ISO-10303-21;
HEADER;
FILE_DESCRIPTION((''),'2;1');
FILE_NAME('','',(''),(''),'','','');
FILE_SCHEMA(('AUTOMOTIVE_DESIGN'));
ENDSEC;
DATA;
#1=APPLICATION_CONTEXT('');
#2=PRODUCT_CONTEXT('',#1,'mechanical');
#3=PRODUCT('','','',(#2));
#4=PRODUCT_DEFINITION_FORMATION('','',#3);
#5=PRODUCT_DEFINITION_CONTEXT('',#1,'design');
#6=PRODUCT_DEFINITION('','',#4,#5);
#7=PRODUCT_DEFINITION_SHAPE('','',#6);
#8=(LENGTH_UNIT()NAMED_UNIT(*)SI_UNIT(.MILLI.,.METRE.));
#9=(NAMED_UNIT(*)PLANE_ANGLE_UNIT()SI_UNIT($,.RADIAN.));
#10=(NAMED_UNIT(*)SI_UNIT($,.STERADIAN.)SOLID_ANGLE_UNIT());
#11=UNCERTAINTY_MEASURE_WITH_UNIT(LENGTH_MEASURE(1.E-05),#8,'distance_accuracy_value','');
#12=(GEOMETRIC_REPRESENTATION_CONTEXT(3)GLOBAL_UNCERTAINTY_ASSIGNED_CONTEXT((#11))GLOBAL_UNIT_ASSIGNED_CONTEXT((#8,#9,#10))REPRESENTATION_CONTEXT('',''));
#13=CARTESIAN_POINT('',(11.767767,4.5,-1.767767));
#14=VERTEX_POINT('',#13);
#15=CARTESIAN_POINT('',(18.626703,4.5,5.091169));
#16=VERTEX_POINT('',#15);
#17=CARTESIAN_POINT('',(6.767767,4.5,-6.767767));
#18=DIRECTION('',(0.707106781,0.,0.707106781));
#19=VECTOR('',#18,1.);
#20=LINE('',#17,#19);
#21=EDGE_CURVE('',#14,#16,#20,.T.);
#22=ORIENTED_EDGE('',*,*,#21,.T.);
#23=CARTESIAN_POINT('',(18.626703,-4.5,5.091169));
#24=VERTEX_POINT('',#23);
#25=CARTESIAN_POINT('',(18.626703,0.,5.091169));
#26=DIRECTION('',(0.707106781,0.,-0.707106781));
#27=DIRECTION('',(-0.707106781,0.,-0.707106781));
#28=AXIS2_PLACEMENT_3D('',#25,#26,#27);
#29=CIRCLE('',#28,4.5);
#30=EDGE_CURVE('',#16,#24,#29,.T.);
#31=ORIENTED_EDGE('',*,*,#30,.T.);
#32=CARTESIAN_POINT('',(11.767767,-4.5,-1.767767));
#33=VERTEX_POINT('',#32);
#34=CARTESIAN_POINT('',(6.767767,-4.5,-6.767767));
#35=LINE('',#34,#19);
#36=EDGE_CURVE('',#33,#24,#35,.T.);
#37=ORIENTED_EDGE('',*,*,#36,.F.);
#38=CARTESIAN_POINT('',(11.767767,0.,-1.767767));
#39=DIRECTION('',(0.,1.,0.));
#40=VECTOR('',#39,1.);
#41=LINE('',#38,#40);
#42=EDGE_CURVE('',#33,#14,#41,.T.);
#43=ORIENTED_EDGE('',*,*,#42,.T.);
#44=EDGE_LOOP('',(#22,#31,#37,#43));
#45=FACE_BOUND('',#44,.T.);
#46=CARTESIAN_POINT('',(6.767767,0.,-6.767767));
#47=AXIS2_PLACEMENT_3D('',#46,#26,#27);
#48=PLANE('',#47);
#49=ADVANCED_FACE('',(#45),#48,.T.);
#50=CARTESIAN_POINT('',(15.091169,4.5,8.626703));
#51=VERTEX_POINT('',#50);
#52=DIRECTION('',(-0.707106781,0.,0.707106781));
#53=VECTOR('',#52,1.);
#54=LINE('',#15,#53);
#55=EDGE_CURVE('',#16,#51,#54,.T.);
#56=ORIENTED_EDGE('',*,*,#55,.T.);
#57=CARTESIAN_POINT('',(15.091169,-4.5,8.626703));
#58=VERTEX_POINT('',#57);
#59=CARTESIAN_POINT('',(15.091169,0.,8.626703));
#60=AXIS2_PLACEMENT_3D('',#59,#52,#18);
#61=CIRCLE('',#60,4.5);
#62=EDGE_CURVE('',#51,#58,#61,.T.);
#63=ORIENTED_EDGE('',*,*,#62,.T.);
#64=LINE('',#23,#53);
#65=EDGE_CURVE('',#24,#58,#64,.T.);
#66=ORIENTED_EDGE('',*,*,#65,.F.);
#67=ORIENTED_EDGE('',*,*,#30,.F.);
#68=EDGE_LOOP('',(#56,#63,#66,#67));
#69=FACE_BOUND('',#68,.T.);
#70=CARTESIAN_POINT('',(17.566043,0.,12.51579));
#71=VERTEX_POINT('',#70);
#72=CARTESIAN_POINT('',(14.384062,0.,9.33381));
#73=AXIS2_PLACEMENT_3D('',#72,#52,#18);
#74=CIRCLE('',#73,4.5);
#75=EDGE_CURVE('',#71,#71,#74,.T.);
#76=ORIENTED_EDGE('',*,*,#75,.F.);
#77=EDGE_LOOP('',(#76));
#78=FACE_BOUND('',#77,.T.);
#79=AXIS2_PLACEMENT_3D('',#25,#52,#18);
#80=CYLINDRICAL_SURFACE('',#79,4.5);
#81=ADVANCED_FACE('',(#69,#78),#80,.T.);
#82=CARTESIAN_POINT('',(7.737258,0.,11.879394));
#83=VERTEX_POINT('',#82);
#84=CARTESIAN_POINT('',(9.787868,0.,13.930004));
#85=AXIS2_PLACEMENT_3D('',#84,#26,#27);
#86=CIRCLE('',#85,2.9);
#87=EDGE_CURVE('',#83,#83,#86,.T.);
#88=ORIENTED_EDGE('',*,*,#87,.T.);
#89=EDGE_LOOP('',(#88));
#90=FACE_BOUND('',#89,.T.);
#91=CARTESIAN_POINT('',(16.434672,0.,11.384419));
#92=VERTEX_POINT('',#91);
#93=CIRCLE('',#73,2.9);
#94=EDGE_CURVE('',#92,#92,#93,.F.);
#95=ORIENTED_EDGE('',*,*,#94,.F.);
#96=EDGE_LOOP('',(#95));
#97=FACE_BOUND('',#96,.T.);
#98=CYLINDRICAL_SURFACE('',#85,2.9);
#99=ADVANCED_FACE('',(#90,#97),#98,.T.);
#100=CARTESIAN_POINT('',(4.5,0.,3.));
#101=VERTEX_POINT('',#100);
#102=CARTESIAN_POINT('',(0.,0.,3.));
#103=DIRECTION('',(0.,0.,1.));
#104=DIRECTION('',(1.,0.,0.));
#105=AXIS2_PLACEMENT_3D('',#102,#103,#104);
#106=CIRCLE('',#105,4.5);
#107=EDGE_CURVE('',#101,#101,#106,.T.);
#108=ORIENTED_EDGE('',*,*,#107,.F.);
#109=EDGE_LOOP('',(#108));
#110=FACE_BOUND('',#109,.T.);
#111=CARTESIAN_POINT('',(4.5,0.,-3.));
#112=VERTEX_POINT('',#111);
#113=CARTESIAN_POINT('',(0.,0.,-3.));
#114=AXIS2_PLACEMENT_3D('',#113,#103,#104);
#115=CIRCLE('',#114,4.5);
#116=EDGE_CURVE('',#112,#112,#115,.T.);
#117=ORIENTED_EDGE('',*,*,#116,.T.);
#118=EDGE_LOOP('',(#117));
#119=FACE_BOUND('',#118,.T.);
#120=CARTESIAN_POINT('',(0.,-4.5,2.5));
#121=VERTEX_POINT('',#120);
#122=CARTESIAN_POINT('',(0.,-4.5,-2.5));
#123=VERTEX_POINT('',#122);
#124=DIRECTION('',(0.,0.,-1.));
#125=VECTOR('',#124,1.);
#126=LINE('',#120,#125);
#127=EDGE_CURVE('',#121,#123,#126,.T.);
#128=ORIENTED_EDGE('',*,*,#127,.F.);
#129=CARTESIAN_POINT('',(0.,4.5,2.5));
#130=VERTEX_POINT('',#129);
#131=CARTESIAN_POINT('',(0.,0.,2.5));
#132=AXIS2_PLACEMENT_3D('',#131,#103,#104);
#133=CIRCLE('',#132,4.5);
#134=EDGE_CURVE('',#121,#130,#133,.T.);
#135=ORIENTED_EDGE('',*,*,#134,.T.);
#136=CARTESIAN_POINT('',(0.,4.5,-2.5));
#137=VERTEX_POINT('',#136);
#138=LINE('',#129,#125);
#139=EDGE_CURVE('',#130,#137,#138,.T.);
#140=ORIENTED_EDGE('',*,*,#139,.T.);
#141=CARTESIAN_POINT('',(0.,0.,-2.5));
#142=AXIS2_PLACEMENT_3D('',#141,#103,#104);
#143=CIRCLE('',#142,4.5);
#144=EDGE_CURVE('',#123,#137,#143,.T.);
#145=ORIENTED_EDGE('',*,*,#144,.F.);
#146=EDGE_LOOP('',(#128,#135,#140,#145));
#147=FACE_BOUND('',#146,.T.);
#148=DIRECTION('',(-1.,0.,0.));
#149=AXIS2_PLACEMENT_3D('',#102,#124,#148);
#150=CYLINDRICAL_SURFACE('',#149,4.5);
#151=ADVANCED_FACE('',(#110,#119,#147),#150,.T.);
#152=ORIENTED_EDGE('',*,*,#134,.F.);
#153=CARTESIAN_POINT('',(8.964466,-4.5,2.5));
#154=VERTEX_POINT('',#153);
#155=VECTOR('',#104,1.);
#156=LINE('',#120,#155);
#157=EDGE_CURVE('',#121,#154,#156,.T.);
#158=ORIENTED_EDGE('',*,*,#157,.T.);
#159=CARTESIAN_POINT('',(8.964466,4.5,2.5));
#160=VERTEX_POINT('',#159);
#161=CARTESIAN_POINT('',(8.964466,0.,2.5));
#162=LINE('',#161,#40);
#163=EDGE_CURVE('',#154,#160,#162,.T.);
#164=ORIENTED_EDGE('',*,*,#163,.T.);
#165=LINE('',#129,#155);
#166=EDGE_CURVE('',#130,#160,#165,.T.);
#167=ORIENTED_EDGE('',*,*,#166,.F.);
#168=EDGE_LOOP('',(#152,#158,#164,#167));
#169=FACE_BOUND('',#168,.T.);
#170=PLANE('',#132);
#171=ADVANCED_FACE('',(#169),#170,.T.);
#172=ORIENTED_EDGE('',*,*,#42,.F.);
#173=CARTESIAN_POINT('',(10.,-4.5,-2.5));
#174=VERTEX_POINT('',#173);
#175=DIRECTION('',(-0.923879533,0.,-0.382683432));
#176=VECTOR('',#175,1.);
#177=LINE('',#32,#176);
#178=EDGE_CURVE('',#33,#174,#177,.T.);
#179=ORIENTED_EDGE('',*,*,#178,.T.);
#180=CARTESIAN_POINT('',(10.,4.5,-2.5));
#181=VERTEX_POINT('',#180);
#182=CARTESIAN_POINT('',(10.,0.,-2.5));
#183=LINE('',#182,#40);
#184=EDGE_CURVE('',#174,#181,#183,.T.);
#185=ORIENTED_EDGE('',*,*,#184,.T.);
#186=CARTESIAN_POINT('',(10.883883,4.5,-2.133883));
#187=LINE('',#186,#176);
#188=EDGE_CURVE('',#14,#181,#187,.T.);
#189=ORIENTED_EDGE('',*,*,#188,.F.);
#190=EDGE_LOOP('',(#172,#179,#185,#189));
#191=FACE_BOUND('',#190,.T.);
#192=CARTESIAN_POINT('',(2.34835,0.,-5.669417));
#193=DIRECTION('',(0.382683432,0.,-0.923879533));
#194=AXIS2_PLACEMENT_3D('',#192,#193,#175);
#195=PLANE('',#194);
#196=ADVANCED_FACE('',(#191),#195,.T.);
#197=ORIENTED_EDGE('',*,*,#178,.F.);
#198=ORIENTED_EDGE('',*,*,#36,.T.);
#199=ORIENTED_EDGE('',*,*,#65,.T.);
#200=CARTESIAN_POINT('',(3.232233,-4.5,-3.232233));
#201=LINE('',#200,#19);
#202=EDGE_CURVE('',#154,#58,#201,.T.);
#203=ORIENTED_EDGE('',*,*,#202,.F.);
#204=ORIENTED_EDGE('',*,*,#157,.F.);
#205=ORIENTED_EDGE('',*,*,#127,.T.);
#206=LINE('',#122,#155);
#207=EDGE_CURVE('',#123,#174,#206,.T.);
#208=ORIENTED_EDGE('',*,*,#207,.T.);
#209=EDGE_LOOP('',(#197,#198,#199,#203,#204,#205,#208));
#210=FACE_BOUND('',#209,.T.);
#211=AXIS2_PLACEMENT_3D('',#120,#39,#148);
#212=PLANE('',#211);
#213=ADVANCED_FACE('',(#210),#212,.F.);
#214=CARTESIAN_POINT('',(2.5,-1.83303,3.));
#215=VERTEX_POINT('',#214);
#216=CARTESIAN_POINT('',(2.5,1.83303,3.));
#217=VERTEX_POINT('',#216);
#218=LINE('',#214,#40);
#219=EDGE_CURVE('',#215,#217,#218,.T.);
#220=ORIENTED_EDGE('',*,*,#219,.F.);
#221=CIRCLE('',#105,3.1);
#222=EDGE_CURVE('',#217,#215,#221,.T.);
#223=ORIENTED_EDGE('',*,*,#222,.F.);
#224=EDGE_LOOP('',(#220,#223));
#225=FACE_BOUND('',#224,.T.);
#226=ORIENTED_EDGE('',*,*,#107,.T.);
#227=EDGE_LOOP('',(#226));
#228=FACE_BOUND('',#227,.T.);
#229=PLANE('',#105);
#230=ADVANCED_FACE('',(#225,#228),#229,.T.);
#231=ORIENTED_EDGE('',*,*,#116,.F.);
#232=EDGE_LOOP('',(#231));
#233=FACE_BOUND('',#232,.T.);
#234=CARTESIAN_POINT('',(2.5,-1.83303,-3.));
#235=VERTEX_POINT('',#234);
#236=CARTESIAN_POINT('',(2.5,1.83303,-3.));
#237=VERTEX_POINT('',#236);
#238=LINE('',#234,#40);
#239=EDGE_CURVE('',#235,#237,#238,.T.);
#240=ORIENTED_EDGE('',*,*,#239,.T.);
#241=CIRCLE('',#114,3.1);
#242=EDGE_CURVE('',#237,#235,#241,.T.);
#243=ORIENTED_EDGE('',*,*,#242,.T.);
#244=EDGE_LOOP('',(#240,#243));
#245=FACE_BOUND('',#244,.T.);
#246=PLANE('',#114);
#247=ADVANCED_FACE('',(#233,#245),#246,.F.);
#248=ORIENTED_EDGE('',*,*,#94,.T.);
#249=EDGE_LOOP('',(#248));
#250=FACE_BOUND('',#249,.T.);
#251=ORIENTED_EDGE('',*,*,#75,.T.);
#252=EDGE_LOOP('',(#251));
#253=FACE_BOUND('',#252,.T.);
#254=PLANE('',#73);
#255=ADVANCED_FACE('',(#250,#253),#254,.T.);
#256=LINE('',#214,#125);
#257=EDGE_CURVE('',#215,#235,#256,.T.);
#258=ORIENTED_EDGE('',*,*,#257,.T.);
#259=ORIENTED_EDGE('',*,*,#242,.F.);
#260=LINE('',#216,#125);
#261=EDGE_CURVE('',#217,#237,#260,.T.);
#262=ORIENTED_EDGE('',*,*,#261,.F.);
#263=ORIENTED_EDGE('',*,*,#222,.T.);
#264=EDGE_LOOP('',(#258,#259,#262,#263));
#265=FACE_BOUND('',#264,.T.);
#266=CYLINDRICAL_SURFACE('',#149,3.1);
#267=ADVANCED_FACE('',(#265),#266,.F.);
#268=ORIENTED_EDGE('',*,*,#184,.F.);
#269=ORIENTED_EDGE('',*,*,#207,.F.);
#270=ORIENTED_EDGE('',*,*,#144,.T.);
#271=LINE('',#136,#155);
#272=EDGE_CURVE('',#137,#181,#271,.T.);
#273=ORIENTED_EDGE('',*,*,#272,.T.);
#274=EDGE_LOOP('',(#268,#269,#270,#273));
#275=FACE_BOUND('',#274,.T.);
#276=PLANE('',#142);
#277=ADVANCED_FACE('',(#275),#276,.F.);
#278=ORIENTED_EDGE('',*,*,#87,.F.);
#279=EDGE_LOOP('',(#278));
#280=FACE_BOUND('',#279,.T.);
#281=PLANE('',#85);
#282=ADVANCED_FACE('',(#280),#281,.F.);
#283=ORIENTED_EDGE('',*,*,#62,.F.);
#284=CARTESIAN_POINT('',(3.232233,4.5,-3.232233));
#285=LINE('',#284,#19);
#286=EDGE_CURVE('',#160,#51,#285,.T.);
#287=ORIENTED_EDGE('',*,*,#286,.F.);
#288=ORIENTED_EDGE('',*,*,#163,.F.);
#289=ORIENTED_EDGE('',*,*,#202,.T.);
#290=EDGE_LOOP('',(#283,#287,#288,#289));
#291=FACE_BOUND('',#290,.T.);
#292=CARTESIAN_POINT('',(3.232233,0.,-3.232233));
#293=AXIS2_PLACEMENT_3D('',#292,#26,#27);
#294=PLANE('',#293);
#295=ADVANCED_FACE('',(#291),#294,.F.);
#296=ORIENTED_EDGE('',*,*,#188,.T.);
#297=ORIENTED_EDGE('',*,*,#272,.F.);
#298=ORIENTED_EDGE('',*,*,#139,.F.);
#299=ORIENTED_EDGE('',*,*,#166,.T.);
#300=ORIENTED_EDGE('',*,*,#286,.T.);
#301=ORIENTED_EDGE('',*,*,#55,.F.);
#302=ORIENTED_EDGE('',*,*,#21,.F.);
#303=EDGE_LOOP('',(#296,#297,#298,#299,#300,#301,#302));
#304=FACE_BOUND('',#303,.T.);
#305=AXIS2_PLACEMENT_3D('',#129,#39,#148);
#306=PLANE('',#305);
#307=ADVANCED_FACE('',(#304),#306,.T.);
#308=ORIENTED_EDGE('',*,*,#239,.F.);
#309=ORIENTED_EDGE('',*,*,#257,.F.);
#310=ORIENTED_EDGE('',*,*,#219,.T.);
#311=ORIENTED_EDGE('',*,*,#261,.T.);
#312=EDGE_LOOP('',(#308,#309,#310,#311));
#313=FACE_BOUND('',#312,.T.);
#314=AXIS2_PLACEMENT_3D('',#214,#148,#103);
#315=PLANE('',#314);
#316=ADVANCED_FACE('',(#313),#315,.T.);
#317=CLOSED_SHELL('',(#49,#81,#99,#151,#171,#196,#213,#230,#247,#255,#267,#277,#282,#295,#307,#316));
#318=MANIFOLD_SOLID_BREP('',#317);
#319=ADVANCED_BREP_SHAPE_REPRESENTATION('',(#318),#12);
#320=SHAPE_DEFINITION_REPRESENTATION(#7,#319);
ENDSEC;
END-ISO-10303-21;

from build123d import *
from build123d.topology import SkipClean

# Parameters (mm, degrees)
SKETCH_1_R      = 4.5
EXTRUDE_1_DEPTH = 3
EXTRUDE_2_DEPTH = 2.5
EXTRUDE_3_DEPTH = 2.5
LOFT_START      = -4.5
LOFT_1_DEPTH    = 9
SKETCH_4_R      = 2.9
EXTRUDE_5_DEPTH = 10
SKETCH_5_R      = 4.5
EXTRUDE_6_DEPTH = 1


# Read off the part's stored shape, not the designer's step: 放样1
with BuildPart() as part:
    # 草图1 → 凸台-拉伸1 (new, symmetric)
    with BuildSketch(Plane.XY):
        Circle(SKETCH_1_R)
        with BuildLine():
            Line((2.5, -1.833030278), (2.5, 1.833030278))
            ThreePointArc((2.5, 1.833030278), (-3.1, 0), (2.5, -1.833030278))
        make_face(mode=Mode.SUBTRACT)
    extrude(amount=EXTRUDE_1_DEPTH, both=True)

    # 草图2 → 凸台-拉伸2 (add, symmetric)
    with BuildSketch(Plane.XY):
        with BuildLine():
            ThreePointArc((4.5, 0), (3.181980515, -3.181980515), (0, -4.5))
            Line((0, -4.5), (10, -4.5))
            Line((10, -4.5), (10, 4.5))
            Line((10, 4.5), (0, 4.5))
            ThreePointArc((0, 4.5), (3.181980515, 3.181980515), (4.5, 0))
        make_face()
    extrude(amount=EXTRUDE_2_DEPTH, both=True)

    # 草图3 → 凸台-拉伸3 (add, symmetric)
    with BuildSketch(Plane(origin=(5, 0, -5), x_dir=(0, 1, 0), z_dir=(0.7071067811865438, 0, -0.7071067811865512))):
        with BuildLine():
            Line((-4.5, 7.071067812), (4.5, 7.071067812))
            Line((4.5, 7.071067812), (4.5, 16.771067812))
            ThreePointArc((4.5, 16.771067812), (0, 21.271067812), (-4.5, 16.771067812))
            Line((-4.5, 16.771067812), (-4.5, 7.071067812))
        make_face()
    extrude(amount=EXTRUDE_3_DEPTH, both=True)

    # 放样1 outline → 放样1 (add)
    with BuildSketch(Plane(origin=(0, 0, 0), x_dir=(1, 0, 0), z_dir=(0, 1, 0)).offset(LOFT_START)):
        Polygon((10, 0), (11.767766953, 1.767766953), (10, 2.5), align=None)
    extrude(amount=LOFT_1_DEPTH)

    # 草图4 → 凸台-拉伸5 (add)
    with BuildSketch(Plane(origin=(5, 0, -5), x_dir=(0, 1, 0), z_dir=(0.7071067811865438, 0, -0.7071067811865512))):
        with Locations(Location((0, 16.771067812, 0), (0, 0, 270))):
            Circle(SKETCH_4_R)
    extrude(amount=-EXTRUDE_5_DEPTH)

    # 草图5 → 凸台-拉伸6 (add)
    with SkipClean():  # the faces are left unmerged after this step: merging them gives an invalid solid
        with BuildSketch(Plane(origin=(3.232233047, 0, -3.232233047), x_dir=(0.7071067811865512, 0, 0.7071067811865438), z_dir=(-0.7071067811865438, 0, 0.7071067811865512))):
            with Locations((16.771067812, 0)):
                Circle(SKETCH_5_R)
        extrude(amount=EXTRUDE_6_DEPTH)
    add(part.part.scale(1), mode=Mode.REPLACE)  # the faces are merged on a copy


solid = part.part
